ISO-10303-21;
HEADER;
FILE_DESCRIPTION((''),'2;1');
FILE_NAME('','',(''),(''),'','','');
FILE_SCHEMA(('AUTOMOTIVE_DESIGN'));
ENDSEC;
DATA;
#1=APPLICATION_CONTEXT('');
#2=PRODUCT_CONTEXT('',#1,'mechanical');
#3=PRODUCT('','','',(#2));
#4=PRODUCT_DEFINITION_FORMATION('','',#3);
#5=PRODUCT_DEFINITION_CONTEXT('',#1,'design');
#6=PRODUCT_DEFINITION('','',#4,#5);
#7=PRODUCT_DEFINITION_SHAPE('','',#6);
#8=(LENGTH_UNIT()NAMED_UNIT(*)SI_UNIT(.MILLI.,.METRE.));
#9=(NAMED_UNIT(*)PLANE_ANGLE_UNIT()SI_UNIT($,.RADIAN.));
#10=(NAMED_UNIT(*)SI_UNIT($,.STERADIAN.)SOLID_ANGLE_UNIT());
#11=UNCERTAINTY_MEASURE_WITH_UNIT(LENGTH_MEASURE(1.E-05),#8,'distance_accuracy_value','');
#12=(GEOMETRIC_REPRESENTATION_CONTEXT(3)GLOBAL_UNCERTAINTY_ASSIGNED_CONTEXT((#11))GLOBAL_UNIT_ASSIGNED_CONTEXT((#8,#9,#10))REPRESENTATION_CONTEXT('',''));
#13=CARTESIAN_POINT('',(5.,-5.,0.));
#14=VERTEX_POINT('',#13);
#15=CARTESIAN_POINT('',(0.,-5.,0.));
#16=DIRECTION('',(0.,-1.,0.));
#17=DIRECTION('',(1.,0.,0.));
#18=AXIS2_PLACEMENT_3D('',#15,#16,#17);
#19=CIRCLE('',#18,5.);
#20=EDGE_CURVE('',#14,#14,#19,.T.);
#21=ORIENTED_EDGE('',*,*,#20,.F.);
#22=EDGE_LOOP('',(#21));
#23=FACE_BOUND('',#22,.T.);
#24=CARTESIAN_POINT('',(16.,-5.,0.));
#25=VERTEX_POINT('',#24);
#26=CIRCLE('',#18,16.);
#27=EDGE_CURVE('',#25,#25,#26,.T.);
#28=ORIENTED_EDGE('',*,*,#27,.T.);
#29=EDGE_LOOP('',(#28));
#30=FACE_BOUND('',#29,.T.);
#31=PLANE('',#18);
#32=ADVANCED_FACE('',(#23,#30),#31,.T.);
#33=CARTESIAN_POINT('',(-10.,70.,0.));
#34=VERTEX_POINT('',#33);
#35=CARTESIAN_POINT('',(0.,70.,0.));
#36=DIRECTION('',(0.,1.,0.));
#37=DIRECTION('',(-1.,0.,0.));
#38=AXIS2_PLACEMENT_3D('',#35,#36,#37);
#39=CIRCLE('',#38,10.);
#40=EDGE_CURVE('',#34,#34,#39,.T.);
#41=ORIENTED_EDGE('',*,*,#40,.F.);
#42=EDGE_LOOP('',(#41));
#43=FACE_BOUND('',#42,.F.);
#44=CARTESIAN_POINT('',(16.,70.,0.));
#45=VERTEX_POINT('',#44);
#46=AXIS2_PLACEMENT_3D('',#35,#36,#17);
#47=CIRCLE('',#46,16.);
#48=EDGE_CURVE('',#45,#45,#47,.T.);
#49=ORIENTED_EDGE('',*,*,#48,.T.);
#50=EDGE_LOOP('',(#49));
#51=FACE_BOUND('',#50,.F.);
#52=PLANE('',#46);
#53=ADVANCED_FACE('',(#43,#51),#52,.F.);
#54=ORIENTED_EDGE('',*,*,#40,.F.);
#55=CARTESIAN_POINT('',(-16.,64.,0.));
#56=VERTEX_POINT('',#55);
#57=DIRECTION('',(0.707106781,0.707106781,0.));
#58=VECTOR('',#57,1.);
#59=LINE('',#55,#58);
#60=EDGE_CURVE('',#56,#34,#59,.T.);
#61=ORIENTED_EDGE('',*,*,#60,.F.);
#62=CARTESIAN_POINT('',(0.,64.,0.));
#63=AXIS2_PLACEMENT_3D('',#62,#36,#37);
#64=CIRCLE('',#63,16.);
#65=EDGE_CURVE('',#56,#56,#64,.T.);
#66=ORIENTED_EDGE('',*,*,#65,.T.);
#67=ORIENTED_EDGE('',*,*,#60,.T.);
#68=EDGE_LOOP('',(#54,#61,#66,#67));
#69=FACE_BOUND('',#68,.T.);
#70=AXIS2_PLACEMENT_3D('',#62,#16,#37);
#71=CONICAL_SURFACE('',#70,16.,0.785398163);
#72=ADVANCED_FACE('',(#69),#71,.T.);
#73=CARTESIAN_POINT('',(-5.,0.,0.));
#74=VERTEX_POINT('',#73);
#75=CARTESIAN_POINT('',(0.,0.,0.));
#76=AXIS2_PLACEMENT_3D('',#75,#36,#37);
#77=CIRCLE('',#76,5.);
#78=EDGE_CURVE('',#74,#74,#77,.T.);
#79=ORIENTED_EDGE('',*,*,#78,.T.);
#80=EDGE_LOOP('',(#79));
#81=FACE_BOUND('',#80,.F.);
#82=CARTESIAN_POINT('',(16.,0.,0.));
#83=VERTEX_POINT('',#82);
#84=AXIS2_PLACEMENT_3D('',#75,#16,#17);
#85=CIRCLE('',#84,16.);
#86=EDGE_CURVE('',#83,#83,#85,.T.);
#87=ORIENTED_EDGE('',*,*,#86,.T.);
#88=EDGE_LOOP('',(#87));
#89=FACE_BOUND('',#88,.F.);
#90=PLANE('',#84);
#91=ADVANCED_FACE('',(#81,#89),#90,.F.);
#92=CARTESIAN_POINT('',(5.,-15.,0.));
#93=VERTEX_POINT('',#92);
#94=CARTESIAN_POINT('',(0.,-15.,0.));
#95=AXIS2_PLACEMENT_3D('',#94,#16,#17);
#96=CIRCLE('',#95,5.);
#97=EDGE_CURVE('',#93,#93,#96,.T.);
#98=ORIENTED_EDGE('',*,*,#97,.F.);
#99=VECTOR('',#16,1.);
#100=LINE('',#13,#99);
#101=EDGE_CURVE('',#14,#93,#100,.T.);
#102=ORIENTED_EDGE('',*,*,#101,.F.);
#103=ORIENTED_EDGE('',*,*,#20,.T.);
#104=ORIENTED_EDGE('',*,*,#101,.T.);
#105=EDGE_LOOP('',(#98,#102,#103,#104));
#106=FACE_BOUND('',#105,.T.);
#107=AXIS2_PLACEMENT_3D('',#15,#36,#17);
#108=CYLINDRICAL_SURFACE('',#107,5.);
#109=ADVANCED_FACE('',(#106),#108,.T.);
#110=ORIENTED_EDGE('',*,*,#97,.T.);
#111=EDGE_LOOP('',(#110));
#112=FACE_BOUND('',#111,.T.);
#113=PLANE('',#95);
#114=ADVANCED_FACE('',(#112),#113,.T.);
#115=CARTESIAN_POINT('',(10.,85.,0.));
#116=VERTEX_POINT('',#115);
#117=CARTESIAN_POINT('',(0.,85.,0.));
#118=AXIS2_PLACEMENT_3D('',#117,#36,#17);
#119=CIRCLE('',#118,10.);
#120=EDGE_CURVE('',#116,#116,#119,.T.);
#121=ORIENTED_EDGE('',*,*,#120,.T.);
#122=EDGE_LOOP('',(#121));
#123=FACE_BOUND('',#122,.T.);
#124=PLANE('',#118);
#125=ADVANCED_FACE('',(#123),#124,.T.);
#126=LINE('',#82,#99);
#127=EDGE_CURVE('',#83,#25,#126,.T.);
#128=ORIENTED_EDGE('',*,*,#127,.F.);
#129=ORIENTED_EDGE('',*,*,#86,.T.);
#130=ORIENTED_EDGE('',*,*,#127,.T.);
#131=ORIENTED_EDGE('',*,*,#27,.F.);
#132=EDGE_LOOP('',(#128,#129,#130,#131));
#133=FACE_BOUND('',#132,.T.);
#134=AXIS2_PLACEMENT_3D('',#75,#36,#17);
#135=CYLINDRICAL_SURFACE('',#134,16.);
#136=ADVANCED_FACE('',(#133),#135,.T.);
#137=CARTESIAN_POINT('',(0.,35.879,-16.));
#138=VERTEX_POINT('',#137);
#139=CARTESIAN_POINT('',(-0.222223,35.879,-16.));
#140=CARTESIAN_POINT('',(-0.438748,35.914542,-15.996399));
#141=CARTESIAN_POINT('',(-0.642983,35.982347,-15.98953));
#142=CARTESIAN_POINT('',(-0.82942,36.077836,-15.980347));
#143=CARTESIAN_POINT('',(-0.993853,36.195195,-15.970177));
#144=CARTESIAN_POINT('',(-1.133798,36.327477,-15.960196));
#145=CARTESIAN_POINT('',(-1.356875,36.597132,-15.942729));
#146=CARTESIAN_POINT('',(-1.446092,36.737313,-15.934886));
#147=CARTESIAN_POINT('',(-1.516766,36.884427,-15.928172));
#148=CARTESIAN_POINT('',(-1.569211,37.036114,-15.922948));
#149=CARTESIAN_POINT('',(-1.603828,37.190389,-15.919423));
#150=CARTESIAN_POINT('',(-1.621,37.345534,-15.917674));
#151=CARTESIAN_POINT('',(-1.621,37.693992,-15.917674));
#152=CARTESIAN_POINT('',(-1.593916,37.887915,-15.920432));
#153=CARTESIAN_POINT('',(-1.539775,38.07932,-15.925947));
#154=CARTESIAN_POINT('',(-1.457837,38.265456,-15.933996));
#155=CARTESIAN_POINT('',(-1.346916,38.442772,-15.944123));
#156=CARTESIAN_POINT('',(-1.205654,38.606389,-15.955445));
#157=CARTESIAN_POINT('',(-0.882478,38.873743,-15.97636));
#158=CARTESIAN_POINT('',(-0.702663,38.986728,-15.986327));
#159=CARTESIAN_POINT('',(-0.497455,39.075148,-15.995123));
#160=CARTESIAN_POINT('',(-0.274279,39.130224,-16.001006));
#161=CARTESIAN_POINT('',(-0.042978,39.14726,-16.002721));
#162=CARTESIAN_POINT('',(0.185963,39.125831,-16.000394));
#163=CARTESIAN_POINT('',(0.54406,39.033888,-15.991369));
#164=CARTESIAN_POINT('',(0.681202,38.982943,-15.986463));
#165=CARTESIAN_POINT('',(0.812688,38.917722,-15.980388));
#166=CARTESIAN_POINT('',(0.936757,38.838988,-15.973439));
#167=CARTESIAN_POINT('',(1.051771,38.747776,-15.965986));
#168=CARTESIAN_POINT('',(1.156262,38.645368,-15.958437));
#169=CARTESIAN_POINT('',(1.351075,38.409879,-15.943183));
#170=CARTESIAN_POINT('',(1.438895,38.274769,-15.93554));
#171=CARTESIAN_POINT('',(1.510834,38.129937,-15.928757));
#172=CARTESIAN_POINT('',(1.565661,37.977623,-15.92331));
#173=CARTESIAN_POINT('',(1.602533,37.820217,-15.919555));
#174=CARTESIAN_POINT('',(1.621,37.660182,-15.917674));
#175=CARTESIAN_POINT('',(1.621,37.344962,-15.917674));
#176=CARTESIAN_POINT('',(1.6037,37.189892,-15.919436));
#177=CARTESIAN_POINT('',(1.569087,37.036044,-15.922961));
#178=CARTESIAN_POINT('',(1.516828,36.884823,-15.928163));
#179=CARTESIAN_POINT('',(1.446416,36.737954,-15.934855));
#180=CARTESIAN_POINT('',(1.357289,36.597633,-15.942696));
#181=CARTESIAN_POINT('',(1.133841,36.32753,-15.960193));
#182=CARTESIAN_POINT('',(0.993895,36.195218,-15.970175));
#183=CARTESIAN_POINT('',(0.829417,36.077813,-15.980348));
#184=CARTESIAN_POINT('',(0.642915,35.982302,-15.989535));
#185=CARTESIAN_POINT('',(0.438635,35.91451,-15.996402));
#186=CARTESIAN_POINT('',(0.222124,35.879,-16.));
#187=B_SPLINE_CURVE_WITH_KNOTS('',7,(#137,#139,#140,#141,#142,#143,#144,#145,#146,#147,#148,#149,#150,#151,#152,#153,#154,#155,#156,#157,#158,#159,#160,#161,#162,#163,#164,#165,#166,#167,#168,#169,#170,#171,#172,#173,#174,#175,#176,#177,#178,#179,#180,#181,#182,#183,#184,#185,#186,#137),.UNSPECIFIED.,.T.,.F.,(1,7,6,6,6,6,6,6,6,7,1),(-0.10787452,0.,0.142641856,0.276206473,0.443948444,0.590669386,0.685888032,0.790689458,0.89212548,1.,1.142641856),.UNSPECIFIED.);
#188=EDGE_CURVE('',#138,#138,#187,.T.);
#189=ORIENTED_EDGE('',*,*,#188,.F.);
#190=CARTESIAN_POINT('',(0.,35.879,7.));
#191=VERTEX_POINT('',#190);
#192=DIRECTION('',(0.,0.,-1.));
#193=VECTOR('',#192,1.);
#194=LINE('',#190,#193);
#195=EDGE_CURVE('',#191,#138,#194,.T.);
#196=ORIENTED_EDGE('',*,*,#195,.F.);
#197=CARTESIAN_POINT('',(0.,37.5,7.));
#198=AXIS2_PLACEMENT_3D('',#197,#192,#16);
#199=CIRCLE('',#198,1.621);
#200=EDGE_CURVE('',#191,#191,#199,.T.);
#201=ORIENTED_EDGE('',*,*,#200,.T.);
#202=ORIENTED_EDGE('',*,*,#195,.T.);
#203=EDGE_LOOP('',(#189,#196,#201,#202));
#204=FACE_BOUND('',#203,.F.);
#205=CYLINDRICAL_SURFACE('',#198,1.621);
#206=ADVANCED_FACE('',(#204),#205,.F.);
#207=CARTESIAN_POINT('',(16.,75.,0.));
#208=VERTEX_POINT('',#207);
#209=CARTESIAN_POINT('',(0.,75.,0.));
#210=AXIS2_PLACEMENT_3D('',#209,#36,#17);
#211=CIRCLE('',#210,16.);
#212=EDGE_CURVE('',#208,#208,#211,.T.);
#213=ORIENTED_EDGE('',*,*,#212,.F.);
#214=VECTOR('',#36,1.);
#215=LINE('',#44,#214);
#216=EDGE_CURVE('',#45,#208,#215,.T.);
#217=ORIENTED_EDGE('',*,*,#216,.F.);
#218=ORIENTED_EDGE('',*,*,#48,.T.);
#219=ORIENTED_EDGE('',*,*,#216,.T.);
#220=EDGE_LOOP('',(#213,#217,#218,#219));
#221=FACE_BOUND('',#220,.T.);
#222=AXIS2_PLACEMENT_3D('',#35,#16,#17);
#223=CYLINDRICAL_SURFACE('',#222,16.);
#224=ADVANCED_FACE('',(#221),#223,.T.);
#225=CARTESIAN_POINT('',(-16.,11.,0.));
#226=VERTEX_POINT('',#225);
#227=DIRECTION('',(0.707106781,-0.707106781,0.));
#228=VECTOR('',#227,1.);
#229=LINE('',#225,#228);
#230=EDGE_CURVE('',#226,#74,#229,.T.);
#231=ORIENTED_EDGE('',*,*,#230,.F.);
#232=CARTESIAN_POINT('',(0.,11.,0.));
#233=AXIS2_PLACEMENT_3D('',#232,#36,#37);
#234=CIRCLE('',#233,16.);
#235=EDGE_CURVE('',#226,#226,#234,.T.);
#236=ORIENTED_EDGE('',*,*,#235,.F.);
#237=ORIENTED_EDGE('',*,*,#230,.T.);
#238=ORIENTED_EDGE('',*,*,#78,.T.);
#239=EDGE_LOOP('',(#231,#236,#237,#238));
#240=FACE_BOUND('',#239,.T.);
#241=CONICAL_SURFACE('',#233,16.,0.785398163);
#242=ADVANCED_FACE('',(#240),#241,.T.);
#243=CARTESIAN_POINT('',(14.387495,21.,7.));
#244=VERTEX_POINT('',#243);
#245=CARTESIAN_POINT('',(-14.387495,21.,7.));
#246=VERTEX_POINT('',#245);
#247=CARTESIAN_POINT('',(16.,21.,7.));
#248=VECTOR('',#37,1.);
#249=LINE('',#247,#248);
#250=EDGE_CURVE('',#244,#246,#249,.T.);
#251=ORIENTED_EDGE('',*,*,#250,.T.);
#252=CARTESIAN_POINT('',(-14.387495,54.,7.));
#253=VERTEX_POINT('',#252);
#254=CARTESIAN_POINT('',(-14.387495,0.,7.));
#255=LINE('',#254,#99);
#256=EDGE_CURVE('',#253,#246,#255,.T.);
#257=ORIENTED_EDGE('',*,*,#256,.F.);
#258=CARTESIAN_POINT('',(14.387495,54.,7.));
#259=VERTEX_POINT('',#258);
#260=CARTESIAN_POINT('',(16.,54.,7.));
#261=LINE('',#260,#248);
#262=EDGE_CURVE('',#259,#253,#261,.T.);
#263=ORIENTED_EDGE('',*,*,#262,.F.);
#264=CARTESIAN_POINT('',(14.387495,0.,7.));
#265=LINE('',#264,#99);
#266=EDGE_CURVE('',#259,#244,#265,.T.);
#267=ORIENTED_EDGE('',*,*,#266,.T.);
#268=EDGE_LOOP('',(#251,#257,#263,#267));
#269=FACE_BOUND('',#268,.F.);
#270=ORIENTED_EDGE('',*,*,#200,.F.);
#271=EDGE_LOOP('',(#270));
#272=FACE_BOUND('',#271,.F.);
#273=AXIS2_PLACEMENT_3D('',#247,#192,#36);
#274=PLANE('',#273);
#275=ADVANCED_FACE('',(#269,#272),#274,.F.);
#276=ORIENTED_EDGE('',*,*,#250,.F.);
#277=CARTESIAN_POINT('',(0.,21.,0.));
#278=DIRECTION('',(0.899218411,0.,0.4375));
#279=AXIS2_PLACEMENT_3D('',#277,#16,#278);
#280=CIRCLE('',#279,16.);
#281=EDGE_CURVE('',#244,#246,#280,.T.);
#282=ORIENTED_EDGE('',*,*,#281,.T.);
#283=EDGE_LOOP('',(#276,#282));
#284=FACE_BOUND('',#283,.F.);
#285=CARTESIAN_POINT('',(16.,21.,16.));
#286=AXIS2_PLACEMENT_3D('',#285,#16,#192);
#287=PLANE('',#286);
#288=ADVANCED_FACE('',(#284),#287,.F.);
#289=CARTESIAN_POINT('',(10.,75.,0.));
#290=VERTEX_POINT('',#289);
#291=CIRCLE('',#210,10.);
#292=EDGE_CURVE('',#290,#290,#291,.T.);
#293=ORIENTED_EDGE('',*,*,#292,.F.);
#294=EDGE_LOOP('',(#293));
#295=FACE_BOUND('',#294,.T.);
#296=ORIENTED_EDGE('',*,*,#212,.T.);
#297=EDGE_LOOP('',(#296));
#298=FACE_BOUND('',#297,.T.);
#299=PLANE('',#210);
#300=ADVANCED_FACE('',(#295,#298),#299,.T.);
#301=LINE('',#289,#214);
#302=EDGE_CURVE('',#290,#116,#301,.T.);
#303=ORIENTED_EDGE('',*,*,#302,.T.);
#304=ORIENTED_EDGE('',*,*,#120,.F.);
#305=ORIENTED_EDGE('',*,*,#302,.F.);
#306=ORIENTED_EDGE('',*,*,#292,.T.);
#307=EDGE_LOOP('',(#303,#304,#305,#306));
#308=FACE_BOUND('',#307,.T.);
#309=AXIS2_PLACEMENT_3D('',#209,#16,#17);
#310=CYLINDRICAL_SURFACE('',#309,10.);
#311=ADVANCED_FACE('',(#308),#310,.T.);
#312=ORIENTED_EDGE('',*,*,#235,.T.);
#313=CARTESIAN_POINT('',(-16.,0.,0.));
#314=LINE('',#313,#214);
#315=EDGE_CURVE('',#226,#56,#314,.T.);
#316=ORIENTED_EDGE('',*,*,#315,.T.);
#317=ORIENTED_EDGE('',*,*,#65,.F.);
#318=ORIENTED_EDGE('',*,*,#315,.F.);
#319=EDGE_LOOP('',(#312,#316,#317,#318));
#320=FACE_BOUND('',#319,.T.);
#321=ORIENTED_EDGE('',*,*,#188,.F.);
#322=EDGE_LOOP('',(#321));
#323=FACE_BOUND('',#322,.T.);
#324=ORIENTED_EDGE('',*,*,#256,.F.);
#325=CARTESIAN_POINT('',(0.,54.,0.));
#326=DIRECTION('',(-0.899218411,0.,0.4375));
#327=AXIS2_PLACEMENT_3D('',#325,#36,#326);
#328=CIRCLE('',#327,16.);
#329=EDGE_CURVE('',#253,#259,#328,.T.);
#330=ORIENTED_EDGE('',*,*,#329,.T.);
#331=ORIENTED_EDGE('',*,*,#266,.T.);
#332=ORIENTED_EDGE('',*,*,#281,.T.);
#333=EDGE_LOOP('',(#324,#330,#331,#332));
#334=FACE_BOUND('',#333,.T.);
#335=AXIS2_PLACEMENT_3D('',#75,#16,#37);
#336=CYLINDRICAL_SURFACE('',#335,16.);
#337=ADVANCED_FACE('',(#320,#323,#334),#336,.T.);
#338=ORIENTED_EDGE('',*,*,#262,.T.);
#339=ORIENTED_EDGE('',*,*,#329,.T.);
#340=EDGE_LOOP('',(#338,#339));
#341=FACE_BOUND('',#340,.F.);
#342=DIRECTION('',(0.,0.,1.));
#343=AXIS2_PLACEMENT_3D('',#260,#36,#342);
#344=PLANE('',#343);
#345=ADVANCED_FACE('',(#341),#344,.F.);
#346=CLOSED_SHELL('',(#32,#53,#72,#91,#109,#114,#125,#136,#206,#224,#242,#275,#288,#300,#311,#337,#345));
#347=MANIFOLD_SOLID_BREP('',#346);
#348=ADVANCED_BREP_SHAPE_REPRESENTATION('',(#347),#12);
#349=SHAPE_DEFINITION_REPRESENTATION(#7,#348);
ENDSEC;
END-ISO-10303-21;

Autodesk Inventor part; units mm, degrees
ref_plane "XZ Plane" through (0, 0, 0) normal (0, 1, 0) x (-1, 0, 0)
ref_plane "XY Plane" through (0, 0, 0) normal (0, 0, 1) x (1, 0, 0)
sketch "Sketch1" plane through (0, 0, 0) normal (0, 1, 0) x (-1, 0, 0)
  circle A0 centre (0, 0) radius 16
  dimension "d0" = 32
extrude "Extrusion1" add sketch "Sketch1" along normal blind 70
chamfer "Chamfer1" distance 6 angle 45 1 edges at (16, 70, 0)
chamfer "Chamfer2" distance 11 angle 45 1 edges at (16, 0, 0)
sketch "Sketch2" plane through (0, 70, 0) normal (0, 1, 0) x (1, 0, 0)
  circle A0 centre (0, 0) radius 16
extrude "Extrusion2" add sketch "Sketch2" along normal blind 5
sketch "Sketch3" plane through (0, 0, 0) normal (0, -1, 0) x (1, 0, 0)
  circle A0 centre (0, 0) radius 16
extrude "Extrusion3" add sketch "Sketch3" along normal blind 5
sketch "Sketch4" plane through (0, -5, 0) normal (0, -1, 0) x (1, 0, 0)
  circle A0 centre (0, 0) radius 5
extrude "Extrusion4" add sketch "Sketch4" along normal blind 10
sketch "Sketch5" plane through (0, 75, 0) normal (0, 1, 0) x (1, 0, 0)
  circle A0 centre (0, 0) radius 10
extrude "Extrusion5" add sketch "Sketch5" along normal blind 10
ref_plane "Work Plane1" through (16, 0, 0) normal (1, 0, 0) x (0, 1, 0)
sketch "Sketch6" plane through (16, 0, 0) normal (1, 0, 0) x (0, 1, 0)
  line L0 (11, 16) -> (11, -16) projected
  line L1 (11, 0) -> (21, 0)
  line L2 (21, 0) -> (21, 7)
  line L3 (11, 16) -> (64, 16) projected
  line L4 (21, 7) -> (54, 7)
  line L5 (54, 7) -> (54, 16)
  line L6 (54, 16) -> (21, 16)
  line L7 (21, 16) -> (21, 7)
  point P0 (0, 0)
  dimension "d17" = 10
  dimension "d18" = 7
  dimension "d19" = 33
extrude "Extrusion6" cut sketch "Sketch6" against normal through all contours L3 L5 L4 L7
sketch "Sketch7" plane through (-14.3875, 21, 7) normal (0, 0, 1) x (1, 0, 0)
  line L0 (28.775, 0) -> (0, 0) projected
  line L1 (14.3875, 0) -> (14.3875, 16.5)
  point P0 (14.3875, -21)
  dimension "d22" = 16.5
hole "Hole1" at (0, 37.5, 7) direction (0, 0, -1) diameter 3.242 end through all thread size "M4x0.7" class "6H" standard "ANSI Metric M Profile"
properties part number "MMAE 232 Assignment 1e-Nicholas Skiba" material "Aluminum 6061"
